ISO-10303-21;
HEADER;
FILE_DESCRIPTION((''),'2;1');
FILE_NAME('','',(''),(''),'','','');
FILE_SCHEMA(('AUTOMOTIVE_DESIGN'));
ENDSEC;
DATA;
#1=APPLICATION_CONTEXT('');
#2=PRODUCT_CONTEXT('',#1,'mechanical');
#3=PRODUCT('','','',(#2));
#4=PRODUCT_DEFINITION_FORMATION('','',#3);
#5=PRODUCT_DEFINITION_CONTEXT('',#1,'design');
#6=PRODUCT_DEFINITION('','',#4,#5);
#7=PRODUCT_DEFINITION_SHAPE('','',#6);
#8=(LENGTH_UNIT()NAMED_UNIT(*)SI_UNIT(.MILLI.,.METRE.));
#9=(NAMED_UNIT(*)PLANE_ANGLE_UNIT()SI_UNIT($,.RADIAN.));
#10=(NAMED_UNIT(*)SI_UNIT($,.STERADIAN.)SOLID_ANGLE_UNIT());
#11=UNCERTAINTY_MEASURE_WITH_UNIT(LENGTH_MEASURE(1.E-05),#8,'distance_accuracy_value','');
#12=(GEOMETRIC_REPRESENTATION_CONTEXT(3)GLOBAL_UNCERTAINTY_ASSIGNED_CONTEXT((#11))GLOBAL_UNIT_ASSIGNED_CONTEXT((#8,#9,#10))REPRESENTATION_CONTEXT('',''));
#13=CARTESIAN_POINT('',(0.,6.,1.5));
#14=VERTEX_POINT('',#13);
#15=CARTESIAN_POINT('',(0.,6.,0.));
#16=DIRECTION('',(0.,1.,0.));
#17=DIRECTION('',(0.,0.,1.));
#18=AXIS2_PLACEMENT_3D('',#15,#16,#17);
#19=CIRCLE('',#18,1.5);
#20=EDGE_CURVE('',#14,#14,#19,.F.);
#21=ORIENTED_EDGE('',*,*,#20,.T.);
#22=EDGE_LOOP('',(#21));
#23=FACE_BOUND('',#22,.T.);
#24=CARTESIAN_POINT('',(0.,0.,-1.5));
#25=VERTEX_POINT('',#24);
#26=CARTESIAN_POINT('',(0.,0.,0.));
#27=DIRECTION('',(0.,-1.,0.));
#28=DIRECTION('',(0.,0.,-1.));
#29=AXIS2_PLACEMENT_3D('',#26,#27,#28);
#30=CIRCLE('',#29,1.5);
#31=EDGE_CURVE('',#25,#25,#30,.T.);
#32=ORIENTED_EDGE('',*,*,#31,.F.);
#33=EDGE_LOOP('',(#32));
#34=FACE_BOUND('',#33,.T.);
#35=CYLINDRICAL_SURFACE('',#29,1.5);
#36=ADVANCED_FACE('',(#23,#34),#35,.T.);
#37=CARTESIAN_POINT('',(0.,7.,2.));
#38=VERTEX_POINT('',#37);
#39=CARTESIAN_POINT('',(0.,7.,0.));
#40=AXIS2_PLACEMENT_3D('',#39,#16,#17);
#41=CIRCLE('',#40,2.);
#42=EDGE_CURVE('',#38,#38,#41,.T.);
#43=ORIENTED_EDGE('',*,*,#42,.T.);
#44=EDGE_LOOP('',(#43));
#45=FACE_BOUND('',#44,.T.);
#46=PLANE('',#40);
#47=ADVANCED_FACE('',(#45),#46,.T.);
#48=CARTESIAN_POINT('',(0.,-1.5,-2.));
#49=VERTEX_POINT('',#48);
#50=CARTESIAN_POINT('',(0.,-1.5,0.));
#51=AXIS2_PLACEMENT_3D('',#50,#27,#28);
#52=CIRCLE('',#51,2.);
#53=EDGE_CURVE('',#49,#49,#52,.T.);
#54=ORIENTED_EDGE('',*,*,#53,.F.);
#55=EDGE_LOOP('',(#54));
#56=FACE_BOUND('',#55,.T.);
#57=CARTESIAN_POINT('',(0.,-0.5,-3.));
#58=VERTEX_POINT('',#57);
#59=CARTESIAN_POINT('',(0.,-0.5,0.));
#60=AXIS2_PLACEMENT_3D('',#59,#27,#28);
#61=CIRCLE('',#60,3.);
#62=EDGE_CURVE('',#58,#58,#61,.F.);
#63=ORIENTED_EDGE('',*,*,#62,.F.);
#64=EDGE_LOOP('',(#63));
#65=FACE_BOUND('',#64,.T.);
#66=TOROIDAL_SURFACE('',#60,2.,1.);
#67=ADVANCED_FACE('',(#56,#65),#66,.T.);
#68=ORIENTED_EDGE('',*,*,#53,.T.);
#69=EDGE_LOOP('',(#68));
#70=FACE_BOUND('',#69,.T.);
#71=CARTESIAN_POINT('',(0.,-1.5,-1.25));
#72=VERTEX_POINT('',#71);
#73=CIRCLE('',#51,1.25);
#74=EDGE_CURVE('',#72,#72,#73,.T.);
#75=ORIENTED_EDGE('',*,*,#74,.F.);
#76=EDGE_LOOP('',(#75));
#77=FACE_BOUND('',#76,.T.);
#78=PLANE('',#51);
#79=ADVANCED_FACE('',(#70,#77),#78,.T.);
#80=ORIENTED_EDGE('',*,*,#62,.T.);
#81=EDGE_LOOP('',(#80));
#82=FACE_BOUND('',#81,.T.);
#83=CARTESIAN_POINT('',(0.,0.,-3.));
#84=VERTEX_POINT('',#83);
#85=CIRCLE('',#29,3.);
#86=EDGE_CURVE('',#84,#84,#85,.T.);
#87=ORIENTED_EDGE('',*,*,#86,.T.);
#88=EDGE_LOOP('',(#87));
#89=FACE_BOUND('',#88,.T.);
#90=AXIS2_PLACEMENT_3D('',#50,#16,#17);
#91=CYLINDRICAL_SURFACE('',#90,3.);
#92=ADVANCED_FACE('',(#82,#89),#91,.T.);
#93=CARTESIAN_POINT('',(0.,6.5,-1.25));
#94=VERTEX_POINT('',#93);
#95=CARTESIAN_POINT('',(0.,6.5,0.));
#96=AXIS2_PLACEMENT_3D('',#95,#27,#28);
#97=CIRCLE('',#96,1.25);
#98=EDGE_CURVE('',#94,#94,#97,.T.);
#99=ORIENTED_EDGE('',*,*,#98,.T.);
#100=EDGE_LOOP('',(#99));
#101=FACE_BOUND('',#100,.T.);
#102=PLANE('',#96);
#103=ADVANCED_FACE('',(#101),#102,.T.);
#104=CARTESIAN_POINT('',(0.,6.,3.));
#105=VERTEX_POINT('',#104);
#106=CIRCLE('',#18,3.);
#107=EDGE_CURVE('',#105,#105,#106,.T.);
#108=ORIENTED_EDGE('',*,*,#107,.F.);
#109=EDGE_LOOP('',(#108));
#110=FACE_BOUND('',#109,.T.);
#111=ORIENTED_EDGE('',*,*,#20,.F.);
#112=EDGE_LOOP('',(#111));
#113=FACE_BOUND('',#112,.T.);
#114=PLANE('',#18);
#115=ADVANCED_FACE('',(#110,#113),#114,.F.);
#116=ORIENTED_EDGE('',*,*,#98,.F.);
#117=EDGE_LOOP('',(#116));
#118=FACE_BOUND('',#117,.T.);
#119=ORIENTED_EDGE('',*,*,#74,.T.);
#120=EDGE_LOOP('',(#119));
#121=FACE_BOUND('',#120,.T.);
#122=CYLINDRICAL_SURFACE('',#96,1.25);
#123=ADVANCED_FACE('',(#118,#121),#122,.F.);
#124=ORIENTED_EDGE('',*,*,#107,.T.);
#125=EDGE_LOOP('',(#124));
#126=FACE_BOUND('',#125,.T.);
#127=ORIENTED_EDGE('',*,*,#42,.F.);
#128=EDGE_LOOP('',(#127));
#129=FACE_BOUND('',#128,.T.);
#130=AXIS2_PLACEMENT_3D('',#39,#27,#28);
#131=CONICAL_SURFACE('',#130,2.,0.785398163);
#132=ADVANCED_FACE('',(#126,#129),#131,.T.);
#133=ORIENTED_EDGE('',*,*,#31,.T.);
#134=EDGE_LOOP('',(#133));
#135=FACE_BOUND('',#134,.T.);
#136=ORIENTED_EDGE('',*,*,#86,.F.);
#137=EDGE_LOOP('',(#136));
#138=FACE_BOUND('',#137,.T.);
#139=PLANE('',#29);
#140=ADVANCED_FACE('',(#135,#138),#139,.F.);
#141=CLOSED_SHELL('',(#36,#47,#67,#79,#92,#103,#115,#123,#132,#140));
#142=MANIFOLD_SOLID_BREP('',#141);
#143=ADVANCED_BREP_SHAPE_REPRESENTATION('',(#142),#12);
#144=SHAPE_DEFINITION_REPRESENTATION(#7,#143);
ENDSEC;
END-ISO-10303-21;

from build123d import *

# Parameters (mm, degrees)
ESQUISSE1_W             = 1.5
ESQUISSE1_H             = 6
ESQUISSE2_R             = 3
BOSS_EXTRU_1_DEPTH      = 1
CHANFREIN1_SIZE         = 1
BOSS_EXTRU_2_START      = 1.5
ESQUISSE3_R             = 3
BOSS_EXTRU_2_DEPTH      = 1.5
CONG_1_R                = 1
ESQUISSE4_R             = 1.25
ENL_V_MAT_EXTRU_1_DEPTH = 8


with BuildPart() as part:
    # Esquisse1 → Révol.-Mince1 (revolve)
    with BuildSketch(Plane.XY, mode=Mode.PRIVATE) as r_vol_mince1_sk:
        with Locations((-0.75, 3)):
            Rectangle(ESQUISSE1_W, ESQUISSE1_H)
    revolve(r_vol_mince1_sk.sketch.rotate(Axis((0, 0, 0), (0, 1, 0)), 270), axis=Axis((0, 0, 0), (0, 1, 0)))

    # Esquisse2 → Boss.-Extru.1 (add)
    with BuildSketch(Plane(origin=(0, 6, 0), x_dir=(1, 0, 0), z_dir=(0, 1, 0))):
        with Locations(Location((0, 0, 0), (0, 0, 270))):
            Circle(ESQUISSE2_R)
    extrude(amount=BOSS_EXTRU_1_DEPTH)

    # Chanfrein1
    chanfrein1_edges = [part.edges().sort_by_distance(p)[0] for p in [
        (0, 7, -3),
    ]]
    chamfer(chanfrein1_edges, length=CHANFREIN1_SIZE - 0.0001)  # a hair under: the kernel refuses the full size

    # Esquisse3 → Boss.-Extru.2 (add)
    with BuildSketch(Plane.XZ.offset(BOSS_EXTRU_2_START)):
        with Locations(Location((0, 0, 0), (0, 0, 270))):
            Circle(ESQUISSE3_R)
    extrude(amount=-BOSS_EXTRU_2_DEPTH)

    # Congé1
    cong_1_edges = [part.edges().sort_by_distance(p)[0] for p in [
        (0, -1.5, 3),
    ]]
    fillet(cong_1_edges, radius=CONG_1_R)

    # Esquisse4 → Enlèv. mat.-Extru.1 (cut)
    with BuildSketch(Plane(origin=(0, -1.5, 0), x_dir=(-1, 0, 0), z_dir=(0, -1, 0))):
        with Locations(Location((0, 0, 0), (0, 0, 90))):
            Circle(ESQUISSE4_R)
    extrude(amount=-ENL_V_MAT_EXTRU_1_DEPTH, mode=Mode.SUBTRACT)


solid = part.part
